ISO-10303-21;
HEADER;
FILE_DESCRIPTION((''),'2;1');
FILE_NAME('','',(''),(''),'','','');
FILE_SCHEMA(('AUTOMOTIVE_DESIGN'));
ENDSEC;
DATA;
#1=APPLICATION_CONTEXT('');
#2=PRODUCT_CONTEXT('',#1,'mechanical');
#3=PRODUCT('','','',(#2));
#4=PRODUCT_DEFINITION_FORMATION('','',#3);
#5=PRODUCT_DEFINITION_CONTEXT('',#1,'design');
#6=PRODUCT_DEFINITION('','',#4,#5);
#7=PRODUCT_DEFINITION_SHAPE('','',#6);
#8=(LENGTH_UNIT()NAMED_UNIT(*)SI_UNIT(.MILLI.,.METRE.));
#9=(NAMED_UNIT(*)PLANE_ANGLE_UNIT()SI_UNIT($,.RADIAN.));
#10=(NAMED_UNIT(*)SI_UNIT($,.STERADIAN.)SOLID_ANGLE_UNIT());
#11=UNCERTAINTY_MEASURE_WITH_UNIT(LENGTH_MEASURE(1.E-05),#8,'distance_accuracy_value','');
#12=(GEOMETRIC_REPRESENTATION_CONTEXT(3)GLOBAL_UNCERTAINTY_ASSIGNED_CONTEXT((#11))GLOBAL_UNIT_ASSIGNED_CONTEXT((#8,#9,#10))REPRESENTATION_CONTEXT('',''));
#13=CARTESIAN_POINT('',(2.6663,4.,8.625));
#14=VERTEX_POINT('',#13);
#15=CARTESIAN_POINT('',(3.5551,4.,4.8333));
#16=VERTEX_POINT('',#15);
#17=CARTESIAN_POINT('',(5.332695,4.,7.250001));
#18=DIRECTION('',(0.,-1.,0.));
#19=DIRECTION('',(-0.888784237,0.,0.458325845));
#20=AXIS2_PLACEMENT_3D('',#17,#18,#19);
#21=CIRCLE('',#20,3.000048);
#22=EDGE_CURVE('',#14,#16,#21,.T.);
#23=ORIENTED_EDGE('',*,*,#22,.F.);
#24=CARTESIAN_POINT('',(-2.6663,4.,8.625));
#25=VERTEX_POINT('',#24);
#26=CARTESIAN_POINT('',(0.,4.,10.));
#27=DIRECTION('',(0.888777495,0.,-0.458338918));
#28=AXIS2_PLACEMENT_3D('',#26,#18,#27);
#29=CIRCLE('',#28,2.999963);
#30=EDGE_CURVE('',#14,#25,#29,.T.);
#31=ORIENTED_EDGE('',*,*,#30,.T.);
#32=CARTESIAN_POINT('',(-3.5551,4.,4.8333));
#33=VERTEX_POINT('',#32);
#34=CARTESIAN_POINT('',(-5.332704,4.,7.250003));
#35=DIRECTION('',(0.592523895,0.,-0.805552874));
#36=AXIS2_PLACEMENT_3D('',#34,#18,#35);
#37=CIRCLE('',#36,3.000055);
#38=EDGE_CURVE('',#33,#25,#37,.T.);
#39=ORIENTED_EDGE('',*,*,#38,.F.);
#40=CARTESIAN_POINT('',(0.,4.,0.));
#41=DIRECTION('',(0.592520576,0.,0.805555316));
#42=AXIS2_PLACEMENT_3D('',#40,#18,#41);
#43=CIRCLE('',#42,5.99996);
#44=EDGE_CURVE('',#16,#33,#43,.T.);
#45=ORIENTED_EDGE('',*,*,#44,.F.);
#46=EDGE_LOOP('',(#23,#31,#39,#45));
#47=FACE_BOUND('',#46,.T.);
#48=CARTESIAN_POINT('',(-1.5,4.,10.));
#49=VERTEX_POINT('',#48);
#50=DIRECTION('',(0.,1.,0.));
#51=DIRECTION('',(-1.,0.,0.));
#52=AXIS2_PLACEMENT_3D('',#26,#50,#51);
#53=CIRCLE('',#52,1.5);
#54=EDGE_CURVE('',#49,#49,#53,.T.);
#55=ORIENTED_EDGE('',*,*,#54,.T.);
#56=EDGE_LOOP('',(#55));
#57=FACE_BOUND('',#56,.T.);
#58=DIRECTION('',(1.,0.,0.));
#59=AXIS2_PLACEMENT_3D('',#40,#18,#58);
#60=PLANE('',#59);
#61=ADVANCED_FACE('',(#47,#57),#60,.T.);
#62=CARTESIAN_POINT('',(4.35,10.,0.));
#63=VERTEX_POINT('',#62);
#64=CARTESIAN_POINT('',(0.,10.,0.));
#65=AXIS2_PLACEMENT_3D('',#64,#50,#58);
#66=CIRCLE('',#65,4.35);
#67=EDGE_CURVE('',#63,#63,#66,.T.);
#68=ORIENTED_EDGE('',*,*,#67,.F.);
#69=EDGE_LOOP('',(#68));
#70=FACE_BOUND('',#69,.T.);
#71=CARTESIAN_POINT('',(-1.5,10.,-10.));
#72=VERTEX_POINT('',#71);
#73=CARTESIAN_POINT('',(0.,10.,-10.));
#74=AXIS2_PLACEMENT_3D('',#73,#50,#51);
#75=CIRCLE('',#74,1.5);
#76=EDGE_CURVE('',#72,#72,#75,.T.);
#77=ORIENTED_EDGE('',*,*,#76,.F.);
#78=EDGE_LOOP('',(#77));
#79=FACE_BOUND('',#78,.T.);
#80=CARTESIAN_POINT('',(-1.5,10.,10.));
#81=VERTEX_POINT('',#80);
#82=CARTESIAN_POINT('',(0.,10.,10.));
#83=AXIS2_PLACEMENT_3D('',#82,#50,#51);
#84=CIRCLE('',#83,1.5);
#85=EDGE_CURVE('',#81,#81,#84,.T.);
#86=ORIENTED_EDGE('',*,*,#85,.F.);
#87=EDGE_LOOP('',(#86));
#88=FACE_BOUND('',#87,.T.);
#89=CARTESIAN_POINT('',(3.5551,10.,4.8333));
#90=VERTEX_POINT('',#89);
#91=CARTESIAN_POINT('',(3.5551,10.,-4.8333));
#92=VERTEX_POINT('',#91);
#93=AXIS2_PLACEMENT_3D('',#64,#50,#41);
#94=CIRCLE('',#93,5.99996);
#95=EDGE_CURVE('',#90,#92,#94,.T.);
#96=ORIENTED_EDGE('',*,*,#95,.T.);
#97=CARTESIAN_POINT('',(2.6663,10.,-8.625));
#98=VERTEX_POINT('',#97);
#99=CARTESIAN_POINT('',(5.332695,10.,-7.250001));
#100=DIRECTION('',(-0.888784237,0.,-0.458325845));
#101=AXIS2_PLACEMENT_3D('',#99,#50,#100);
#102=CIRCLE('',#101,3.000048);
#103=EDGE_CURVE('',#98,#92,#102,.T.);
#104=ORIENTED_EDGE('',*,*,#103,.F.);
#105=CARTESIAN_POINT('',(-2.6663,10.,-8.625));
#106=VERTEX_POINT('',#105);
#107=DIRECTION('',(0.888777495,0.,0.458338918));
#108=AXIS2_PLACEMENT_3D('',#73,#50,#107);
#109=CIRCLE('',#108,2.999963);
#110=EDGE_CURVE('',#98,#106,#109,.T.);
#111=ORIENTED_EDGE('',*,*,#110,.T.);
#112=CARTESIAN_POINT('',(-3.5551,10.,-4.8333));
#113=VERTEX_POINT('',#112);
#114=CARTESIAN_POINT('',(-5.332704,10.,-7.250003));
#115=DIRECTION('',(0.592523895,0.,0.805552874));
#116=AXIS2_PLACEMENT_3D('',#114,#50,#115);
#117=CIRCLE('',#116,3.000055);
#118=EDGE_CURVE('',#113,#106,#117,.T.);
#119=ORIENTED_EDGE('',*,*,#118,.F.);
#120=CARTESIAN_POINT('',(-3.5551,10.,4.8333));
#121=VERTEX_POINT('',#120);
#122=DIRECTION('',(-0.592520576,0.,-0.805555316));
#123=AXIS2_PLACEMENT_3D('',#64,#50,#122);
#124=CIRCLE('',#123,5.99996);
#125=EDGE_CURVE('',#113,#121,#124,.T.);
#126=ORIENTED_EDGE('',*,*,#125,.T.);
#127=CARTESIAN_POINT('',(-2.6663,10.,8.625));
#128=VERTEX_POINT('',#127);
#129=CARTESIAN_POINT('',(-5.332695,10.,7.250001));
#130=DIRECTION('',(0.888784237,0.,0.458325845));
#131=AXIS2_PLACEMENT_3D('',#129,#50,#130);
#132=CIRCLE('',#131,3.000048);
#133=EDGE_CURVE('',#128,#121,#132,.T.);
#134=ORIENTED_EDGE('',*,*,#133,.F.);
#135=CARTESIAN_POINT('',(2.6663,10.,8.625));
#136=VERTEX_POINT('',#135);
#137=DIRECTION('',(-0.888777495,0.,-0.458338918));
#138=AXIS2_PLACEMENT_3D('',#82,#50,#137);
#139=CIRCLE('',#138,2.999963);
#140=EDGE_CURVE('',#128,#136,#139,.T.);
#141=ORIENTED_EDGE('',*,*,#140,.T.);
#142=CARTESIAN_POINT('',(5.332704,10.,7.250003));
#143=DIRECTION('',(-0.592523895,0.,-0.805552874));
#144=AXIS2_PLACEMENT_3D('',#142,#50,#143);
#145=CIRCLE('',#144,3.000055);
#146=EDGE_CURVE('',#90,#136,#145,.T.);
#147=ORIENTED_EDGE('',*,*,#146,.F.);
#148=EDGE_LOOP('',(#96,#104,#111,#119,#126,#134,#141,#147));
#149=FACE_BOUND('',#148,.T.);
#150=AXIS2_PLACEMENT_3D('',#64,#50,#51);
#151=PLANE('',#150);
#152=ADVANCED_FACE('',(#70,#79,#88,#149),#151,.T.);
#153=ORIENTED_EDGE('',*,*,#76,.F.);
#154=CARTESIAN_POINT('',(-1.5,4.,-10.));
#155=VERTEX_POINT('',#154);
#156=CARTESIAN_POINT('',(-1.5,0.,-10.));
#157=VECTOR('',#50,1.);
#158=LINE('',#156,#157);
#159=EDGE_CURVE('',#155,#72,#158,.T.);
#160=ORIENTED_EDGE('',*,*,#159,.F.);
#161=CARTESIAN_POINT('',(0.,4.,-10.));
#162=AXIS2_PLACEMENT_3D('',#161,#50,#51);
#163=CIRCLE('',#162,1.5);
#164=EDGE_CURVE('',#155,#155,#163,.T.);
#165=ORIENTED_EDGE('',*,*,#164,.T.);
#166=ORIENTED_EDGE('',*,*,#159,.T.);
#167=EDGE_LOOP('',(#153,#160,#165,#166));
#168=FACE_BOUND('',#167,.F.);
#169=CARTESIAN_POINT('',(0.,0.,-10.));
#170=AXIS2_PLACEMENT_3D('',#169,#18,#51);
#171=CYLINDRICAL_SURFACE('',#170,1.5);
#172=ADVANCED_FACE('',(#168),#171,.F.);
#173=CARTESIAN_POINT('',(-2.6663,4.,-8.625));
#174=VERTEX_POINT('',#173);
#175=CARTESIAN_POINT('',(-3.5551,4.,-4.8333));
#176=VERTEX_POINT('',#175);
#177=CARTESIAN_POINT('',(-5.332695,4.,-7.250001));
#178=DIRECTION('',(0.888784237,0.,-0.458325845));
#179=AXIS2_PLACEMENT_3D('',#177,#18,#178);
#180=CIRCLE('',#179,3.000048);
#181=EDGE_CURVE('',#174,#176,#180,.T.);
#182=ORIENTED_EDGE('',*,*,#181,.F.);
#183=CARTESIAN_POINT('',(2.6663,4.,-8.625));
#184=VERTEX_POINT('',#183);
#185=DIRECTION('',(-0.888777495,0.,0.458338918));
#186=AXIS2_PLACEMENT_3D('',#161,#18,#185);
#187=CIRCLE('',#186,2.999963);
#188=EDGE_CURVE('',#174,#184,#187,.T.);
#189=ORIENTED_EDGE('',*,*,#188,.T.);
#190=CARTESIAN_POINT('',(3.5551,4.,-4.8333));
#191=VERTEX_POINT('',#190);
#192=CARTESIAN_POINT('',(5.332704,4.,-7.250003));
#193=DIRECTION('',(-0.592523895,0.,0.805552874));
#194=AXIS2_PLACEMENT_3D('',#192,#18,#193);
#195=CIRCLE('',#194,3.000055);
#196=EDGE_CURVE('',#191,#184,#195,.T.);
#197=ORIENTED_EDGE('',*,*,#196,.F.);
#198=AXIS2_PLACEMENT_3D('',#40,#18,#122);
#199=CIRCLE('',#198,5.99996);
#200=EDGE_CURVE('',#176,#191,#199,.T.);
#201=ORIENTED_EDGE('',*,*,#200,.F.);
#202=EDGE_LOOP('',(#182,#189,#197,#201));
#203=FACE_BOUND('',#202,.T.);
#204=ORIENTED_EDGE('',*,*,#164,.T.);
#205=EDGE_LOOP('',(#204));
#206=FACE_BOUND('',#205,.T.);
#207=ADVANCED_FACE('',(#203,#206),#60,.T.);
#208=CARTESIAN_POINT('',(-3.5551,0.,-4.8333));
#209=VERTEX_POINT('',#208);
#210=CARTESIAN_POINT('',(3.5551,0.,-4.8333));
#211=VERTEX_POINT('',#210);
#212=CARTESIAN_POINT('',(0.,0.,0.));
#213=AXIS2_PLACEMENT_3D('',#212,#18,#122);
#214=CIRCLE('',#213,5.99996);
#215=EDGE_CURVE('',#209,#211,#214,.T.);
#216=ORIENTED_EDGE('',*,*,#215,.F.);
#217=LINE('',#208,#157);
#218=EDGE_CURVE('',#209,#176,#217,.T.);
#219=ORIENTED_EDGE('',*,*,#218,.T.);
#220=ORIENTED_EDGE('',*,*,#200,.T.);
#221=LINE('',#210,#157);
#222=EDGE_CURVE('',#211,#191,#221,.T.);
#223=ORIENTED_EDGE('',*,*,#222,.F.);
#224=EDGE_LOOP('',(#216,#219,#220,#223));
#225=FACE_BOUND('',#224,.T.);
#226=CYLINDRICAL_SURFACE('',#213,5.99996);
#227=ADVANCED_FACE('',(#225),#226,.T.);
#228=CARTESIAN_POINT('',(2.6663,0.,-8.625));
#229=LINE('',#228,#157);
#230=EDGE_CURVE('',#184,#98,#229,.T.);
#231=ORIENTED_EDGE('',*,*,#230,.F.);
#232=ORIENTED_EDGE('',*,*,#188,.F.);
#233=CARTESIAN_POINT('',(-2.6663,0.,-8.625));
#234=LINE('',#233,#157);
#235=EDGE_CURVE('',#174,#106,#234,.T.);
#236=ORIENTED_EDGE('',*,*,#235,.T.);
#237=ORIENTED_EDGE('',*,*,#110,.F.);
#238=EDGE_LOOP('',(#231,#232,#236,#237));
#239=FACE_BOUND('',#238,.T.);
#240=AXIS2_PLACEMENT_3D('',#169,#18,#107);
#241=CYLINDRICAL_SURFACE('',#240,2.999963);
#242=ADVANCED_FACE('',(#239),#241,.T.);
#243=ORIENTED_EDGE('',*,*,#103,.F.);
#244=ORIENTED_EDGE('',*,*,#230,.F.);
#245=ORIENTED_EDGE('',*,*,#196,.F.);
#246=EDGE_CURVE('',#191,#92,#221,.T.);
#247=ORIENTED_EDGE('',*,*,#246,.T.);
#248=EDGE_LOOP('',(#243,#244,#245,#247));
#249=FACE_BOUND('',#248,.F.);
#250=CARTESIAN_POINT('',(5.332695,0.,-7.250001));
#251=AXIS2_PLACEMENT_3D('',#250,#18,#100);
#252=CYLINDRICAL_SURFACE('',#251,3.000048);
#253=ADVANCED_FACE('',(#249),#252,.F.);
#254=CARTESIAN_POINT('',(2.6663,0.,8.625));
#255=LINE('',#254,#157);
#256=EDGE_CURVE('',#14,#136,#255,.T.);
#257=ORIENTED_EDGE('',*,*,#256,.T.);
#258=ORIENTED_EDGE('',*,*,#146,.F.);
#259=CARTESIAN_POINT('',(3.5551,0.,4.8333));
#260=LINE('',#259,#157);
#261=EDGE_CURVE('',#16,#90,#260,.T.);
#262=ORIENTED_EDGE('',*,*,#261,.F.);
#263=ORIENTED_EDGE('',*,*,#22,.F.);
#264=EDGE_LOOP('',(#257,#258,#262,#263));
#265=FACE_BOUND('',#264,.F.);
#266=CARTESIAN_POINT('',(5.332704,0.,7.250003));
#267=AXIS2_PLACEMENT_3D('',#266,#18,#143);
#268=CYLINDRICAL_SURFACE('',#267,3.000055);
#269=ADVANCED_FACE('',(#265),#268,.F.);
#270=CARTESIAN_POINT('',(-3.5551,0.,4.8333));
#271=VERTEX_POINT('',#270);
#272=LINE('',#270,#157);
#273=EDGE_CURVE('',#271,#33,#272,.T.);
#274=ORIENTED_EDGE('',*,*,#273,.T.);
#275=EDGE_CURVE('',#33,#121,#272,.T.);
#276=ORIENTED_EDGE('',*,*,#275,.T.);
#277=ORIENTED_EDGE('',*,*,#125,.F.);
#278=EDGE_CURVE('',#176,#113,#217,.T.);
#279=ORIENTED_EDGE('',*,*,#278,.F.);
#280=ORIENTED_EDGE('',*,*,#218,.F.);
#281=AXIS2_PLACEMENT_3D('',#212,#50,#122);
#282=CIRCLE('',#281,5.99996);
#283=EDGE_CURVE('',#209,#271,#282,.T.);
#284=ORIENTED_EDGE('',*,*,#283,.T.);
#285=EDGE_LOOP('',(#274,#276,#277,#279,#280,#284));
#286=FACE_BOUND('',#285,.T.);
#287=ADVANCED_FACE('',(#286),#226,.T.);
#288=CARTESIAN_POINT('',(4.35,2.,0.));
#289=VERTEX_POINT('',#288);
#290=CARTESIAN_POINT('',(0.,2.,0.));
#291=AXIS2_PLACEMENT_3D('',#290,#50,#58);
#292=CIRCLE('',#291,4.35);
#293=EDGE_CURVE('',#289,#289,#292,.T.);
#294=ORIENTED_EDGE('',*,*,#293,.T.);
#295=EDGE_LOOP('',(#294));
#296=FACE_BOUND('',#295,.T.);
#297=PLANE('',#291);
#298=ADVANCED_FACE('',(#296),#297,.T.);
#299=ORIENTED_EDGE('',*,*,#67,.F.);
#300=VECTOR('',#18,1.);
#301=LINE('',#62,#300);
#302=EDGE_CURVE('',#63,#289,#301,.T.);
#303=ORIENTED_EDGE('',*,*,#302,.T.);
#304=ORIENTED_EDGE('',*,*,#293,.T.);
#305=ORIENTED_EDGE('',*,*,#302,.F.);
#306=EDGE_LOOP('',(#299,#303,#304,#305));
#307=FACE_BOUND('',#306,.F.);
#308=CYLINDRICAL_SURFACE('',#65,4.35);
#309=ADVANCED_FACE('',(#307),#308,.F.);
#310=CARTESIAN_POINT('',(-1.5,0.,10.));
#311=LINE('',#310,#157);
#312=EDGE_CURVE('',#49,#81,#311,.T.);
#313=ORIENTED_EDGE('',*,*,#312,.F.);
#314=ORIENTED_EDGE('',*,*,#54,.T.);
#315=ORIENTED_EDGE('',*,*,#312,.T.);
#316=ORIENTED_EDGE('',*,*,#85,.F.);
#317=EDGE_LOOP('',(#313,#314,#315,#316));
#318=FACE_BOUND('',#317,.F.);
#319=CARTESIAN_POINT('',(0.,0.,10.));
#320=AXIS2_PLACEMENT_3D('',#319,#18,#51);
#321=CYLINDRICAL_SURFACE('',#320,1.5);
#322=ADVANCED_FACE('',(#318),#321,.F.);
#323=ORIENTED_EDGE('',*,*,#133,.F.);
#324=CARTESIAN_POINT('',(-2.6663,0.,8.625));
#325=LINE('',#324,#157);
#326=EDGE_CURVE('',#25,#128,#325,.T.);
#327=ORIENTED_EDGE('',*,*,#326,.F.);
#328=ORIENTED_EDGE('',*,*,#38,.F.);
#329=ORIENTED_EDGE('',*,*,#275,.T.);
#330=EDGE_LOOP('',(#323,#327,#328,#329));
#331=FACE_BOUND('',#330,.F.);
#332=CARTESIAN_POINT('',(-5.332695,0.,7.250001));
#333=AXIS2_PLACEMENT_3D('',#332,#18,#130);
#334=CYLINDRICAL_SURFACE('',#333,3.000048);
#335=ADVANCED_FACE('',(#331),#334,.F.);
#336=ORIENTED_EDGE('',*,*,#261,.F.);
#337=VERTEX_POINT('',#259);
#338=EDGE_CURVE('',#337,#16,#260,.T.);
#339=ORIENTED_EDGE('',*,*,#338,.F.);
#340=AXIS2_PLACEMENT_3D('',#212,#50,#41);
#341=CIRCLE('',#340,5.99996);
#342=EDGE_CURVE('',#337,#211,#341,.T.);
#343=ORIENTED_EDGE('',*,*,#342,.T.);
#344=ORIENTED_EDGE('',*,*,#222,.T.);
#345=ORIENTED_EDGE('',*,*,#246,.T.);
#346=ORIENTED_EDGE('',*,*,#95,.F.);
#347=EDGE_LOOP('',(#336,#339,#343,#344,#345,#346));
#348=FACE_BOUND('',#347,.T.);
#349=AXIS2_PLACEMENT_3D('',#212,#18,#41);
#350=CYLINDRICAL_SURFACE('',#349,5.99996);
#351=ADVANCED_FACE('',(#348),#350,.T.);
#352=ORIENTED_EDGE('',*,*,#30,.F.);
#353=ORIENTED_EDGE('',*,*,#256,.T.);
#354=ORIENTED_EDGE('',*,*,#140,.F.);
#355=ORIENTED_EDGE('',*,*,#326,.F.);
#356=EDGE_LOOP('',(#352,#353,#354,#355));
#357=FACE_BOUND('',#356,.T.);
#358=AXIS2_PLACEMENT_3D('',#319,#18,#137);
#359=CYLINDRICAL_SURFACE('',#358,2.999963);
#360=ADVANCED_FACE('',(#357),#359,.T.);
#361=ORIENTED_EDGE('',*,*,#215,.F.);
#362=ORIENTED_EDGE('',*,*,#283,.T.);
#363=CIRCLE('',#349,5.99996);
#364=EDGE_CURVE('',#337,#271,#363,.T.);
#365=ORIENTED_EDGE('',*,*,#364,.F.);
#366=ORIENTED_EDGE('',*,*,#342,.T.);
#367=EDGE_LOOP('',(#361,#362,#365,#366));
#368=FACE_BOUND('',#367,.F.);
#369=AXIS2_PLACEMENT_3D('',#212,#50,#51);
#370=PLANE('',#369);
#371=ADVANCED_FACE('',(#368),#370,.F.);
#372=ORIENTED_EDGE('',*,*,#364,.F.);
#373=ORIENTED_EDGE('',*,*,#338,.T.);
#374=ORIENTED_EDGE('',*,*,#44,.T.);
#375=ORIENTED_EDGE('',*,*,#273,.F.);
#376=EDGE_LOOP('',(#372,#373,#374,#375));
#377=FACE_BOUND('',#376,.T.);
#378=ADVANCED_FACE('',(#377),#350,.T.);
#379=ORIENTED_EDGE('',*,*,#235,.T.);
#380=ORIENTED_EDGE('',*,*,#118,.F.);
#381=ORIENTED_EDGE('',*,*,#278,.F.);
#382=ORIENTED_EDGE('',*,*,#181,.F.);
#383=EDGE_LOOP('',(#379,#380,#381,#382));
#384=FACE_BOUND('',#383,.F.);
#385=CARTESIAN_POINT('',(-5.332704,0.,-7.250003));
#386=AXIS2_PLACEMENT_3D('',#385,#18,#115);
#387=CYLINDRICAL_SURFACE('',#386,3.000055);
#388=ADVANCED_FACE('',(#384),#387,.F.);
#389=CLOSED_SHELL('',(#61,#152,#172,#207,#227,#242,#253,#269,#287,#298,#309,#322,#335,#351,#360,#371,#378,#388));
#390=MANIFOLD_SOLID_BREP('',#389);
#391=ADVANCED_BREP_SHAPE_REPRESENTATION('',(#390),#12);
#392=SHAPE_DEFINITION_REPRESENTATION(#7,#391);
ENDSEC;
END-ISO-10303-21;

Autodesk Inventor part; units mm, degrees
ref_plane "YZ Plane" through (0, 0, 0) normal (1, 0, 0) x (0, 1, 0)
ref_plane "XZ Plane" through (0, 0, 0) normal (0, 1, 0) x (-1, 0, 0)
ref_plane "XY Plane" through (0, 0, 0) normal (0, 0, 1) x (1, 0, 0)
sketch "Sketch1" plane through (0, 0, 0) normal (0, 1, 0) x (-1, 0, 0)
  circle A0 centre (0, 10) radius 1.5
  circle A1 centre (0, -10) radius 1.5
  arc A2 (2.6663, 8.625) -> (-2.6663, 8.625) centre (0, 10) ccw
  arc A3 (-2.6663, -8.625) -> (2.6663, -8.625) centre (0, -10) ccw
  arc A4 (2.6663, 8.625) -> (3.5551, 4.8333) centre (5.3327, 7.25) ccw
  arc A5 (-3.5551, 4.8333) -> (-2.6663, 8.625) centre (-5.3327, 7.25) ccw
  arc A6 (3.5551, -4.8333) -> (2.6663, -8.625) centre (5.3327, -7.25) ccw
  arc A7 (-2.6663, -8.625) -> (-3.5551, -4.8333) centre (-5.3327, -7.25) ccw
  arc A8 (-3.5551, 4.8333) -> (-3.5551, -4.8333) centre (0, 0) ccw
  arc A9 (3.5551, -4.8333) -> (3.5551, 4.8333) centre (0, 0) ccw
  dimension "d1" = 10
  dimension "d2" = 20
  dimension "d3" = 3
  dimension "d4" = 6
  dimension "d5" = 6
  dimension "d6" = 6
  dimension "d7" = 6
  dimension "d8" = 3
extrude "Extrusion1" add sketch "Sketch1" along normal blind 10
sketch "Sketch2" plane through (0, 10, 0) normal (0, 1, 0) x (1, 0, 0)
  circle A0 centre (0, 0) radius 4.35
  dimension "d11" = 8.7
extrude "Extrusion2" cut sketch "Sketch2" against normal blind 8
sketch "Sketch3" plane through (0, 0, 0) normal (0, -1, 0) x (1, 0, 0)
  circle A0 centre (0, 10) radius 1.5 projected
  arc A1 (2.6663, 8.625) -> (-2.6663, 8.625) centre (0, 10) ccw
  circle A2 centre (0, -10) radius 1.5 projected
  arc A3 (-2.6663, -8.625) -> (2.6663, -8.625) centre (0, -10) ccw
  arc A4 (2.6663, 8.625) -> (-2.6663, 8.625) centre (0, 10) ccw projected
  arc A5 (2.6663, 8.625) -> (3.5551, 4.8333) centre (5.3327, 7.25) ccw
  arc A6 (-3.5551, 4.8333) -> (-2.6663, 8.625) centre (-5.3327, 7.25) ccw
  arc A7 (-2.6663, -8.625) -> (-3.5551, -4.8333) centre (-5.3327, -7.25) ccw
  arc A8 (3.5551, -4.8333) -> (2.6663, -8.625) centre (5.3327, -7.25) ccw
  arc A9 (3.5551, -4.8333) -> (3.5551, 4.8333) centre (0, 0) ccw projected
  arc A10 (2.6663, 8.625) -> (3.5551, 4.8333) centre (5.3327, 7.25) ccw projected
  arc A11 (-3.5551, 4.8333) -> (-2.6663, 8.625) centre (-5.3327, 7.25) ccw projected
  arc A12 (-2.6663, -8.625) -> (-3.5551, -4.8333) centre (-5.3327, -7.25) ccw projected
  arc A13 (3.5551, -4.8333) -> (2.6663, -8.625) centre (5.3327, -7.25) ccw projected
  arc A14 (-3.5551, 4.8333) -> (-3.5551, -4.8333) centre (0, 0) ccw projected
  arc A15 (-2.6663, -8.625) -> (2.6663, -8.625) centre (0, -10) ccw projected
  arc A16 (3.5551, 4.8333) -> (-3.5551, 4.8333) centre (0, 0) ccw
  arc A17 (-3.5551, -4.8333) -> (3.5551, -4.8333) centre (0, 0) ccw
extrude "Extrusion3" cut sketch "Sketch3" against normal blind 4 contours A5 A16 A6 A1 | A8 A3 A7 A17
properties part number "Cap"
